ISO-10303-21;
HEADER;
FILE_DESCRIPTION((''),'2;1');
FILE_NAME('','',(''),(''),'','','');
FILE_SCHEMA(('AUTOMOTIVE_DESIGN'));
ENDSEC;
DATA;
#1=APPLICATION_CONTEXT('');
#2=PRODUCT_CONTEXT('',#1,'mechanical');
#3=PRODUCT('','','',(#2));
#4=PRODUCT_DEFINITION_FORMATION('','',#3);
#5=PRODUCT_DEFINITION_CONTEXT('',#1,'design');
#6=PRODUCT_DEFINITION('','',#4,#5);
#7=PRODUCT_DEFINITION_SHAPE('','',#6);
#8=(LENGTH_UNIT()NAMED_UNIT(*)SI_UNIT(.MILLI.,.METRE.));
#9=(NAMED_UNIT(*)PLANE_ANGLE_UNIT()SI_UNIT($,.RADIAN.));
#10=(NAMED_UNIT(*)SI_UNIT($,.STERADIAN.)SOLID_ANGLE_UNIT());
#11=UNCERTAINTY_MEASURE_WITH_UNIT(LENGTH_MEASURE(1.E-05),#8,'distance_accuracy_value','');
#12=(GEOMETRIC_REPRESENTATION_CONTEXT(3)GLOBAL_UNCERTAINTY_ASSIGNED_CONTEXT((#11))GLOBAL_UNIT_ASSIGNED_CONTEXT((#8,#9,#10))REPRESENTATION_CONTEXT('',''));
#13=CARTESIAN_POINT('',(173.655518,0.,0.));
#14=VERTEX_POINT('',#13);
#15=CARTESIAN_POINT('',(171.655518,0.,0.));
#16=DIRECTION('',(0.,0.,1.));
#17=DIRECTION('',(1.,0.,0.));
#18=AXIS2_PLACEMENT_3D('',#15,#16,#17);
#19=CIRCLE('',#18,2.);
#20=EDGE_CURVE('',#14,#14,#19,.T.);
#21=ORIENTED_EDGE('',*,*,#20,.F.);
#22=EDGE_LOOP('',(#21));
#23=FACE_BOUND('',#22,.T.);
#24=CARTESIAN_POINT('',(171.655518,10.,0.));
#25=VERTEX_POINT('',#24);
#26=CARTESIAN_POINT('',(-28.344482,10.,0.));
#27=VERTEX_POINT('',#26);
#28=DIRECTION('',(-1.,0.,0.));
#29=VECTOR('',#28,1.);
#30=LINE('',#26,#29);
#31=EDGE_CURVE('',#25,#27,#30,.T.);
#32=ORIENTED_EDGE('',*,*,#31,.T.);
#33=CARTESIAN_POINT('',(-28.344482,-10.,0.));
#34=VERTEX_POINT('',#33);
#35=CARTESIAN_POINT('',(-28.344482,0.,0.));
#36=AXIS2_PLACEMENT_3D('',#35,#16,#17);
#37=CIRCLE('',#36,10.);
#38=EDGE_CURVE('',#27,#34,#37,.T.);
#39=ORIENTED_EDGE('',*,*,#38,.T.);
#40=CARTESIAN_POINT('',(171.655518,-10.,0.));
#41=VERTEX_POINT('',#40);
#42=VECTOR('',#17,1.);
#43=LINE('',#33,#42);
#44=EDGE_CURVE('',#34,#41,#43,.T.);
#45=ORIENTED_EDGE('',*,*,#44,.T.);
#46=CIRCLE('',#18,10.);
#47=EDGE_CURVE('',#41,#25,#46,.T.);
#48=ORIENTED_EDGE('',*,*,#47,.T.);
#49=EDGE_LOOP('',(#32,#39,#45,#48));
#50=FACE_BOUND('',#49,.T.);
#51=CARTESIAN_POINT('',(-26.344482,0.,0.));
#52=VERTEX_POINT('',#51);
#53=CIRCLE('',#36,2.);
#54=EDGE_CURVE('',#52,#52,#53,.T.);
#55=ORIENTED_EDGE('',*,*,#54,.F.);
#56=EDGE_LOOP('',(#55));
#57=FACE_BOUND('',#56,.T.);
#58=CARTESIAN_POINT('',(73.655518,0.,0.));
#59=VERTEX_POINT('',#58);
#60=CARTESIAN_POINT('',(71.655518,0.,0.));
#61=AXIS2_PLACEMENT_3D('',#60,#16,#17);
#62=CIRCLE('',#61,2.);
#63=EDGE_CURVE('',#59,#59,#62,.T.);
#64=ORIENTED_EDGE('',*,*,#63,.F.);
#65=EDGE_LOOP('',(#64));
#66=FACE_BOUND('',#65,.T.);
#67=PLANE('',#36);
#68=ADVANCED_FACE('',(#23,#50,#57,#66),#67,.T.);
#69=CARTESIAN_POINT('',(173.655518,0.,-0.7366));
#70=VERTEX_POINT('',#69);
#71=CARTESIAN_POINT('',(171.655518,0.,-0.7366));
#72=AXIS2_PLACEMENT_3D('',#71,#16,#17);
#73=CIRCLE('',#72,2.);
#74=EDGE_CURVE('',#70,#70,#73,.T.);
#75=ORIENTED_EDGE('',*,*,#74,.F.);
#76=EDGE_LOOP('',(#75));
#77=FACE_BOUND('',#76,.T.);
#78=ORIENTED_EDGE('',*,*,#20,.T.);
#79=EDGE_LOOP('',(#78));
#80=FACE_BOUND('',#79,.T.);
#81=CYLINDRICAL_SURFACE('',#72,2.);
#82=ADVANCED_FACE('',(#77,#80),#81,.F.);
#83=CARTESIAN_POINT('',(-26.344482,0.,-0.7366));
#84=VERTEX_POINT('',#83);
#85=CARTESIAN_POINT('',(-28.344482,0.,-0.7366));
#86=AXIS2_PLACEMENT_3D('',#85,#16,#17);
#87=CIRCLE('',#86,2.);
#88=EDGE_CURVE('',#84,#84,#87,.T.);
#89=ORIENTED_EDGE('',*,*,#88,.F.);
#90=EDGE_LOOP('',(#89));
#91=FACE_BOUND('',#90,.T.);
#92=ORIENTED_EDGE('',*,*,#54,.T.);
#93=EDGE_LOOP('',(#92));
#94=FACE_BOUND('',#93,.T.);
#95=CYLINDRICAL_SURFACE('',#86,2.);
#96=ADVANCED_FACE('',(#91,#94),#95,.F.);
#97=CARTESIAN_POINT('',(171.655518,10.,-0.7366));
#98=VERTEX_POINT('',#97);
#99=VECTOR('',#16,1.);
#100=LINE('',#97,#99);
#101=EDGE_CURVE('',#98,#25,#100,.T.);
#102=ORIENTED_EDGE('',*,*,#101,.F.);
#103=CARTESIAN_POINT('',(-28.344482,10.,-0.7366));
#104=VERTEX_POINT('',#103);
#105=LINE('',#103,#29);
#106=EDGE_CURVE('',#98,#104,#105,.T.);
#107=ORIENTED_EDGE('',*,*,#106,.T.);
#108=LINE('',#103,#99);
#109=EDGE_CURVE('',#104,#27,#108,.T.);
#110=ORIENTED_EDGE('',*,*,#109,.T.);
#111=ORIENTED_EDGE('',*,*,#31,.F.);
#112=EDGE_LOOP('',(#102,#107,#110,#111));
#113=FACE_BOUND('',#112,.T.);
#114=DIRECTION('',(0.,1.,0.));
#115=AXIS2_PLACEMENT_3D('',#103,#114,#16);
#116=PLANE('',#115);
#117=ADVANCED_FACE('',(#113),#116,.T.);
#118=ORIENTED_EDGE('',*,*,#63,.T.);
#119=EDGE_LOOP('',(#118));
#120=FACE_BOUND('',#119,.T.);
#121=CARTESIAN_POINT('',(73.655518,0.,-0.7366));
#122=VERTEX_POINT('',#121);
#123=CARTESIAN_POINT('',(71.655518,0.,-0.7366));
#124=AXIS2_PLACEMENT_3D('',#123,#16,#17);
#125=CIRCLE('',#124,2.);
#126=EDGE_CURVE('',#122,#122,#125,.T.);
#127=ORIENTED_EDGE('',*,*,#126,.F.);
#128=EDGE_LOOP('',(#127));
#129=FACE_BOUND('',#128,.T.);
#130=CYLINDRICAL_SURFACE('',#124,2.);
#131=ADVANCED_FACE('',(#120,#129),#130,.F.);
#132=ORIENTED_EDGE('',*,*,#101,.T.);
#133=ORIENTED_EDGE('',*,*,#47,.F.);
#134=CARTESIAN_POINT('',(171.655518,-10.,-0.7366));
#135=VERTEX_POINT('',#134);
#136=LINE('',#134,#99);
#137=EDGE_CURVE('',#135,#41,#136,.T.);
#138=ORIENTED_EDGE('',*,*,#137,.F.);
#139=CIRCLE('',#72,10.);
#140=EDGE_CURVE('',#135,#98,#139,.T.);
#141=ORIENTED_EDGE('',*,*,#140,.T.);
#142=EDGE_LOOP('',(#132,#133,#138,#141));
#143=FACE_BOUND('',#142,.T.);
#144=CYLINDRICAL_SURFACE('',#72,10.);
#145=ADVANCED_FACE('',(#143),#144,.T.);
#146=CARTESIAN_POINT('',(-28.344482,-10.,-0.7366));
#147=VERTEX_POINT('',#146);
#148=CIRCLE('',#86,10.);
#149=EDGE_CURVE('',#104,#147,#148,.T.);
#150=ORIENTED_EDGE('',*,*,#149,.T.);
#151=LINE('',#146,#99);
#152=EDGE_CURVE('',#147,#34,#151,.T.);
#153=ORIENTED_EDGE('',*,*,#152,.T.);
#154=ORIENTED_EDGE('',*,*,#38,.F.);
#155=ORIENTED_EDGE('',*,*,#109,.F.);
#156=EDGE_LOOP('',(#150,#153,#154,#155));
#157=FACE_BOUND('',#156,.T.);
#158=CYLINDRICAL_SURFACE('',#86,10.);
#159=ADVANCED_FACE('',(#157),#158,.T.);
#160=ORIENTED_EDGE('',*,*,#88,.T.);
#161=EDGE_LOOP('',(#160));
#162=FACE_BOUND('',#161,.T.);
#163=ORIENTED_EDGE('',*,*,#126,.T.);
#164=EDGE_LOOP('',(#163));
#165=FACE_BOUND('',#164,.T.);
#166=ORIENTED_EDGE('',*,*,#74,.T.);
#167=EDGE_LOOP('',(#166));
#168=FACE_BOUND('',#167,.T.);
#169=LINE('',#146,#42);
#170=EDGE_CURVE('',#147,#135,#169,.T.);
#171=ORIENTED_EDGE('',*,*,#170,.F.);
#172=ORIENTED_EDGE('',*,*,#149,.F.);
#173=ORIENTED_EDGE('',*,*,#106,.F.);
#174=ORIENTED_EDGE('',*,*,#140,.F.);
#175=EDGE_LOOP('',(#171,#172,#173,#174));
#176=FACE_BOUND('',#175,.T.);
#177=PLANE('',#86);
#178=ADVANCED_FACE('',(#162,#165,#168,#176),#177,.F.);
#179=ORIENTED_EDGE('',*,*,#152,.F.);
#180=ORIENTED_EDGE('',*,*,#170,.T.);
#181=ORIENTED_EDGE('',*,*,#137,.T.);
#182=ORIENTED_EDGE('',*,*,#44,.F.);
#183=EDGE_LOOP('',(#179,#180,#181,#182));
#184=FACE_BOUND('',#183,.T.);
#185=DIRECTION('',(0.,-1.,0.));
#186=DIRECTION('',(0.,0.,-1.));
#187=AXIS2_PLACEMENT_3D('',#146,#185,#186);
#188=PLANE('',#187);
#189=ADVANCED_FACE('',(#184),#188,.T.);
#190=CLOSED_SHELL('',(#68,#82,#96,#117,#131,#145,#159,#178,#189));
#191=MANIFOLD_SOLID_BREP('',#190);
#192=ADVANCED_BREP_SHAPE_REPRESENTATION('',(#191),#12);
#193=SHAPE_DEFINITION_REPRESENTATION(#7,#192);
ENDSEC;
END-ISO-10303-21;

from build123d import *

# Parameters (mm, degrees)
SKETCH1_R          = 2
BASE_FLANGE1_DEPTH = 0.7366


# Sheet-metal steps are written as plain solids
with BuildPart() as part:
    # Sketch1 → Base-Flange1 (new body)
    with BuildSketch(Plane.XY):
        with BuildLine():
            Line((-28.344481605, 10), (171.655518395, 10))
            ThreePointArc((171.655518395, 10), (181.655518395, 0), (171.655518395, -10))
            Line((171.655518395, -10), (-28.344481605, -10))
            ThreePointArc((-28.344481605, -10), (-38.344481605, 0), (-28.344481605, 10))
        make_face()
        with Locations((-28.344481605, 0)):
            Circle(SKETCH1_R, mode=Mode.SUBTRACT)
        with Locations((171.655518395, 0)):
            Circle(SKETCH1_R, mode=Mode.SUBTRACT)
        with Locations((71.655518395, 0)):
            Circle(SKETCH1_R, mode=Mode.SUBTRACT)
    extrude(amount=-BASE_FLANGE1_DEPTH)


solid = part.part
